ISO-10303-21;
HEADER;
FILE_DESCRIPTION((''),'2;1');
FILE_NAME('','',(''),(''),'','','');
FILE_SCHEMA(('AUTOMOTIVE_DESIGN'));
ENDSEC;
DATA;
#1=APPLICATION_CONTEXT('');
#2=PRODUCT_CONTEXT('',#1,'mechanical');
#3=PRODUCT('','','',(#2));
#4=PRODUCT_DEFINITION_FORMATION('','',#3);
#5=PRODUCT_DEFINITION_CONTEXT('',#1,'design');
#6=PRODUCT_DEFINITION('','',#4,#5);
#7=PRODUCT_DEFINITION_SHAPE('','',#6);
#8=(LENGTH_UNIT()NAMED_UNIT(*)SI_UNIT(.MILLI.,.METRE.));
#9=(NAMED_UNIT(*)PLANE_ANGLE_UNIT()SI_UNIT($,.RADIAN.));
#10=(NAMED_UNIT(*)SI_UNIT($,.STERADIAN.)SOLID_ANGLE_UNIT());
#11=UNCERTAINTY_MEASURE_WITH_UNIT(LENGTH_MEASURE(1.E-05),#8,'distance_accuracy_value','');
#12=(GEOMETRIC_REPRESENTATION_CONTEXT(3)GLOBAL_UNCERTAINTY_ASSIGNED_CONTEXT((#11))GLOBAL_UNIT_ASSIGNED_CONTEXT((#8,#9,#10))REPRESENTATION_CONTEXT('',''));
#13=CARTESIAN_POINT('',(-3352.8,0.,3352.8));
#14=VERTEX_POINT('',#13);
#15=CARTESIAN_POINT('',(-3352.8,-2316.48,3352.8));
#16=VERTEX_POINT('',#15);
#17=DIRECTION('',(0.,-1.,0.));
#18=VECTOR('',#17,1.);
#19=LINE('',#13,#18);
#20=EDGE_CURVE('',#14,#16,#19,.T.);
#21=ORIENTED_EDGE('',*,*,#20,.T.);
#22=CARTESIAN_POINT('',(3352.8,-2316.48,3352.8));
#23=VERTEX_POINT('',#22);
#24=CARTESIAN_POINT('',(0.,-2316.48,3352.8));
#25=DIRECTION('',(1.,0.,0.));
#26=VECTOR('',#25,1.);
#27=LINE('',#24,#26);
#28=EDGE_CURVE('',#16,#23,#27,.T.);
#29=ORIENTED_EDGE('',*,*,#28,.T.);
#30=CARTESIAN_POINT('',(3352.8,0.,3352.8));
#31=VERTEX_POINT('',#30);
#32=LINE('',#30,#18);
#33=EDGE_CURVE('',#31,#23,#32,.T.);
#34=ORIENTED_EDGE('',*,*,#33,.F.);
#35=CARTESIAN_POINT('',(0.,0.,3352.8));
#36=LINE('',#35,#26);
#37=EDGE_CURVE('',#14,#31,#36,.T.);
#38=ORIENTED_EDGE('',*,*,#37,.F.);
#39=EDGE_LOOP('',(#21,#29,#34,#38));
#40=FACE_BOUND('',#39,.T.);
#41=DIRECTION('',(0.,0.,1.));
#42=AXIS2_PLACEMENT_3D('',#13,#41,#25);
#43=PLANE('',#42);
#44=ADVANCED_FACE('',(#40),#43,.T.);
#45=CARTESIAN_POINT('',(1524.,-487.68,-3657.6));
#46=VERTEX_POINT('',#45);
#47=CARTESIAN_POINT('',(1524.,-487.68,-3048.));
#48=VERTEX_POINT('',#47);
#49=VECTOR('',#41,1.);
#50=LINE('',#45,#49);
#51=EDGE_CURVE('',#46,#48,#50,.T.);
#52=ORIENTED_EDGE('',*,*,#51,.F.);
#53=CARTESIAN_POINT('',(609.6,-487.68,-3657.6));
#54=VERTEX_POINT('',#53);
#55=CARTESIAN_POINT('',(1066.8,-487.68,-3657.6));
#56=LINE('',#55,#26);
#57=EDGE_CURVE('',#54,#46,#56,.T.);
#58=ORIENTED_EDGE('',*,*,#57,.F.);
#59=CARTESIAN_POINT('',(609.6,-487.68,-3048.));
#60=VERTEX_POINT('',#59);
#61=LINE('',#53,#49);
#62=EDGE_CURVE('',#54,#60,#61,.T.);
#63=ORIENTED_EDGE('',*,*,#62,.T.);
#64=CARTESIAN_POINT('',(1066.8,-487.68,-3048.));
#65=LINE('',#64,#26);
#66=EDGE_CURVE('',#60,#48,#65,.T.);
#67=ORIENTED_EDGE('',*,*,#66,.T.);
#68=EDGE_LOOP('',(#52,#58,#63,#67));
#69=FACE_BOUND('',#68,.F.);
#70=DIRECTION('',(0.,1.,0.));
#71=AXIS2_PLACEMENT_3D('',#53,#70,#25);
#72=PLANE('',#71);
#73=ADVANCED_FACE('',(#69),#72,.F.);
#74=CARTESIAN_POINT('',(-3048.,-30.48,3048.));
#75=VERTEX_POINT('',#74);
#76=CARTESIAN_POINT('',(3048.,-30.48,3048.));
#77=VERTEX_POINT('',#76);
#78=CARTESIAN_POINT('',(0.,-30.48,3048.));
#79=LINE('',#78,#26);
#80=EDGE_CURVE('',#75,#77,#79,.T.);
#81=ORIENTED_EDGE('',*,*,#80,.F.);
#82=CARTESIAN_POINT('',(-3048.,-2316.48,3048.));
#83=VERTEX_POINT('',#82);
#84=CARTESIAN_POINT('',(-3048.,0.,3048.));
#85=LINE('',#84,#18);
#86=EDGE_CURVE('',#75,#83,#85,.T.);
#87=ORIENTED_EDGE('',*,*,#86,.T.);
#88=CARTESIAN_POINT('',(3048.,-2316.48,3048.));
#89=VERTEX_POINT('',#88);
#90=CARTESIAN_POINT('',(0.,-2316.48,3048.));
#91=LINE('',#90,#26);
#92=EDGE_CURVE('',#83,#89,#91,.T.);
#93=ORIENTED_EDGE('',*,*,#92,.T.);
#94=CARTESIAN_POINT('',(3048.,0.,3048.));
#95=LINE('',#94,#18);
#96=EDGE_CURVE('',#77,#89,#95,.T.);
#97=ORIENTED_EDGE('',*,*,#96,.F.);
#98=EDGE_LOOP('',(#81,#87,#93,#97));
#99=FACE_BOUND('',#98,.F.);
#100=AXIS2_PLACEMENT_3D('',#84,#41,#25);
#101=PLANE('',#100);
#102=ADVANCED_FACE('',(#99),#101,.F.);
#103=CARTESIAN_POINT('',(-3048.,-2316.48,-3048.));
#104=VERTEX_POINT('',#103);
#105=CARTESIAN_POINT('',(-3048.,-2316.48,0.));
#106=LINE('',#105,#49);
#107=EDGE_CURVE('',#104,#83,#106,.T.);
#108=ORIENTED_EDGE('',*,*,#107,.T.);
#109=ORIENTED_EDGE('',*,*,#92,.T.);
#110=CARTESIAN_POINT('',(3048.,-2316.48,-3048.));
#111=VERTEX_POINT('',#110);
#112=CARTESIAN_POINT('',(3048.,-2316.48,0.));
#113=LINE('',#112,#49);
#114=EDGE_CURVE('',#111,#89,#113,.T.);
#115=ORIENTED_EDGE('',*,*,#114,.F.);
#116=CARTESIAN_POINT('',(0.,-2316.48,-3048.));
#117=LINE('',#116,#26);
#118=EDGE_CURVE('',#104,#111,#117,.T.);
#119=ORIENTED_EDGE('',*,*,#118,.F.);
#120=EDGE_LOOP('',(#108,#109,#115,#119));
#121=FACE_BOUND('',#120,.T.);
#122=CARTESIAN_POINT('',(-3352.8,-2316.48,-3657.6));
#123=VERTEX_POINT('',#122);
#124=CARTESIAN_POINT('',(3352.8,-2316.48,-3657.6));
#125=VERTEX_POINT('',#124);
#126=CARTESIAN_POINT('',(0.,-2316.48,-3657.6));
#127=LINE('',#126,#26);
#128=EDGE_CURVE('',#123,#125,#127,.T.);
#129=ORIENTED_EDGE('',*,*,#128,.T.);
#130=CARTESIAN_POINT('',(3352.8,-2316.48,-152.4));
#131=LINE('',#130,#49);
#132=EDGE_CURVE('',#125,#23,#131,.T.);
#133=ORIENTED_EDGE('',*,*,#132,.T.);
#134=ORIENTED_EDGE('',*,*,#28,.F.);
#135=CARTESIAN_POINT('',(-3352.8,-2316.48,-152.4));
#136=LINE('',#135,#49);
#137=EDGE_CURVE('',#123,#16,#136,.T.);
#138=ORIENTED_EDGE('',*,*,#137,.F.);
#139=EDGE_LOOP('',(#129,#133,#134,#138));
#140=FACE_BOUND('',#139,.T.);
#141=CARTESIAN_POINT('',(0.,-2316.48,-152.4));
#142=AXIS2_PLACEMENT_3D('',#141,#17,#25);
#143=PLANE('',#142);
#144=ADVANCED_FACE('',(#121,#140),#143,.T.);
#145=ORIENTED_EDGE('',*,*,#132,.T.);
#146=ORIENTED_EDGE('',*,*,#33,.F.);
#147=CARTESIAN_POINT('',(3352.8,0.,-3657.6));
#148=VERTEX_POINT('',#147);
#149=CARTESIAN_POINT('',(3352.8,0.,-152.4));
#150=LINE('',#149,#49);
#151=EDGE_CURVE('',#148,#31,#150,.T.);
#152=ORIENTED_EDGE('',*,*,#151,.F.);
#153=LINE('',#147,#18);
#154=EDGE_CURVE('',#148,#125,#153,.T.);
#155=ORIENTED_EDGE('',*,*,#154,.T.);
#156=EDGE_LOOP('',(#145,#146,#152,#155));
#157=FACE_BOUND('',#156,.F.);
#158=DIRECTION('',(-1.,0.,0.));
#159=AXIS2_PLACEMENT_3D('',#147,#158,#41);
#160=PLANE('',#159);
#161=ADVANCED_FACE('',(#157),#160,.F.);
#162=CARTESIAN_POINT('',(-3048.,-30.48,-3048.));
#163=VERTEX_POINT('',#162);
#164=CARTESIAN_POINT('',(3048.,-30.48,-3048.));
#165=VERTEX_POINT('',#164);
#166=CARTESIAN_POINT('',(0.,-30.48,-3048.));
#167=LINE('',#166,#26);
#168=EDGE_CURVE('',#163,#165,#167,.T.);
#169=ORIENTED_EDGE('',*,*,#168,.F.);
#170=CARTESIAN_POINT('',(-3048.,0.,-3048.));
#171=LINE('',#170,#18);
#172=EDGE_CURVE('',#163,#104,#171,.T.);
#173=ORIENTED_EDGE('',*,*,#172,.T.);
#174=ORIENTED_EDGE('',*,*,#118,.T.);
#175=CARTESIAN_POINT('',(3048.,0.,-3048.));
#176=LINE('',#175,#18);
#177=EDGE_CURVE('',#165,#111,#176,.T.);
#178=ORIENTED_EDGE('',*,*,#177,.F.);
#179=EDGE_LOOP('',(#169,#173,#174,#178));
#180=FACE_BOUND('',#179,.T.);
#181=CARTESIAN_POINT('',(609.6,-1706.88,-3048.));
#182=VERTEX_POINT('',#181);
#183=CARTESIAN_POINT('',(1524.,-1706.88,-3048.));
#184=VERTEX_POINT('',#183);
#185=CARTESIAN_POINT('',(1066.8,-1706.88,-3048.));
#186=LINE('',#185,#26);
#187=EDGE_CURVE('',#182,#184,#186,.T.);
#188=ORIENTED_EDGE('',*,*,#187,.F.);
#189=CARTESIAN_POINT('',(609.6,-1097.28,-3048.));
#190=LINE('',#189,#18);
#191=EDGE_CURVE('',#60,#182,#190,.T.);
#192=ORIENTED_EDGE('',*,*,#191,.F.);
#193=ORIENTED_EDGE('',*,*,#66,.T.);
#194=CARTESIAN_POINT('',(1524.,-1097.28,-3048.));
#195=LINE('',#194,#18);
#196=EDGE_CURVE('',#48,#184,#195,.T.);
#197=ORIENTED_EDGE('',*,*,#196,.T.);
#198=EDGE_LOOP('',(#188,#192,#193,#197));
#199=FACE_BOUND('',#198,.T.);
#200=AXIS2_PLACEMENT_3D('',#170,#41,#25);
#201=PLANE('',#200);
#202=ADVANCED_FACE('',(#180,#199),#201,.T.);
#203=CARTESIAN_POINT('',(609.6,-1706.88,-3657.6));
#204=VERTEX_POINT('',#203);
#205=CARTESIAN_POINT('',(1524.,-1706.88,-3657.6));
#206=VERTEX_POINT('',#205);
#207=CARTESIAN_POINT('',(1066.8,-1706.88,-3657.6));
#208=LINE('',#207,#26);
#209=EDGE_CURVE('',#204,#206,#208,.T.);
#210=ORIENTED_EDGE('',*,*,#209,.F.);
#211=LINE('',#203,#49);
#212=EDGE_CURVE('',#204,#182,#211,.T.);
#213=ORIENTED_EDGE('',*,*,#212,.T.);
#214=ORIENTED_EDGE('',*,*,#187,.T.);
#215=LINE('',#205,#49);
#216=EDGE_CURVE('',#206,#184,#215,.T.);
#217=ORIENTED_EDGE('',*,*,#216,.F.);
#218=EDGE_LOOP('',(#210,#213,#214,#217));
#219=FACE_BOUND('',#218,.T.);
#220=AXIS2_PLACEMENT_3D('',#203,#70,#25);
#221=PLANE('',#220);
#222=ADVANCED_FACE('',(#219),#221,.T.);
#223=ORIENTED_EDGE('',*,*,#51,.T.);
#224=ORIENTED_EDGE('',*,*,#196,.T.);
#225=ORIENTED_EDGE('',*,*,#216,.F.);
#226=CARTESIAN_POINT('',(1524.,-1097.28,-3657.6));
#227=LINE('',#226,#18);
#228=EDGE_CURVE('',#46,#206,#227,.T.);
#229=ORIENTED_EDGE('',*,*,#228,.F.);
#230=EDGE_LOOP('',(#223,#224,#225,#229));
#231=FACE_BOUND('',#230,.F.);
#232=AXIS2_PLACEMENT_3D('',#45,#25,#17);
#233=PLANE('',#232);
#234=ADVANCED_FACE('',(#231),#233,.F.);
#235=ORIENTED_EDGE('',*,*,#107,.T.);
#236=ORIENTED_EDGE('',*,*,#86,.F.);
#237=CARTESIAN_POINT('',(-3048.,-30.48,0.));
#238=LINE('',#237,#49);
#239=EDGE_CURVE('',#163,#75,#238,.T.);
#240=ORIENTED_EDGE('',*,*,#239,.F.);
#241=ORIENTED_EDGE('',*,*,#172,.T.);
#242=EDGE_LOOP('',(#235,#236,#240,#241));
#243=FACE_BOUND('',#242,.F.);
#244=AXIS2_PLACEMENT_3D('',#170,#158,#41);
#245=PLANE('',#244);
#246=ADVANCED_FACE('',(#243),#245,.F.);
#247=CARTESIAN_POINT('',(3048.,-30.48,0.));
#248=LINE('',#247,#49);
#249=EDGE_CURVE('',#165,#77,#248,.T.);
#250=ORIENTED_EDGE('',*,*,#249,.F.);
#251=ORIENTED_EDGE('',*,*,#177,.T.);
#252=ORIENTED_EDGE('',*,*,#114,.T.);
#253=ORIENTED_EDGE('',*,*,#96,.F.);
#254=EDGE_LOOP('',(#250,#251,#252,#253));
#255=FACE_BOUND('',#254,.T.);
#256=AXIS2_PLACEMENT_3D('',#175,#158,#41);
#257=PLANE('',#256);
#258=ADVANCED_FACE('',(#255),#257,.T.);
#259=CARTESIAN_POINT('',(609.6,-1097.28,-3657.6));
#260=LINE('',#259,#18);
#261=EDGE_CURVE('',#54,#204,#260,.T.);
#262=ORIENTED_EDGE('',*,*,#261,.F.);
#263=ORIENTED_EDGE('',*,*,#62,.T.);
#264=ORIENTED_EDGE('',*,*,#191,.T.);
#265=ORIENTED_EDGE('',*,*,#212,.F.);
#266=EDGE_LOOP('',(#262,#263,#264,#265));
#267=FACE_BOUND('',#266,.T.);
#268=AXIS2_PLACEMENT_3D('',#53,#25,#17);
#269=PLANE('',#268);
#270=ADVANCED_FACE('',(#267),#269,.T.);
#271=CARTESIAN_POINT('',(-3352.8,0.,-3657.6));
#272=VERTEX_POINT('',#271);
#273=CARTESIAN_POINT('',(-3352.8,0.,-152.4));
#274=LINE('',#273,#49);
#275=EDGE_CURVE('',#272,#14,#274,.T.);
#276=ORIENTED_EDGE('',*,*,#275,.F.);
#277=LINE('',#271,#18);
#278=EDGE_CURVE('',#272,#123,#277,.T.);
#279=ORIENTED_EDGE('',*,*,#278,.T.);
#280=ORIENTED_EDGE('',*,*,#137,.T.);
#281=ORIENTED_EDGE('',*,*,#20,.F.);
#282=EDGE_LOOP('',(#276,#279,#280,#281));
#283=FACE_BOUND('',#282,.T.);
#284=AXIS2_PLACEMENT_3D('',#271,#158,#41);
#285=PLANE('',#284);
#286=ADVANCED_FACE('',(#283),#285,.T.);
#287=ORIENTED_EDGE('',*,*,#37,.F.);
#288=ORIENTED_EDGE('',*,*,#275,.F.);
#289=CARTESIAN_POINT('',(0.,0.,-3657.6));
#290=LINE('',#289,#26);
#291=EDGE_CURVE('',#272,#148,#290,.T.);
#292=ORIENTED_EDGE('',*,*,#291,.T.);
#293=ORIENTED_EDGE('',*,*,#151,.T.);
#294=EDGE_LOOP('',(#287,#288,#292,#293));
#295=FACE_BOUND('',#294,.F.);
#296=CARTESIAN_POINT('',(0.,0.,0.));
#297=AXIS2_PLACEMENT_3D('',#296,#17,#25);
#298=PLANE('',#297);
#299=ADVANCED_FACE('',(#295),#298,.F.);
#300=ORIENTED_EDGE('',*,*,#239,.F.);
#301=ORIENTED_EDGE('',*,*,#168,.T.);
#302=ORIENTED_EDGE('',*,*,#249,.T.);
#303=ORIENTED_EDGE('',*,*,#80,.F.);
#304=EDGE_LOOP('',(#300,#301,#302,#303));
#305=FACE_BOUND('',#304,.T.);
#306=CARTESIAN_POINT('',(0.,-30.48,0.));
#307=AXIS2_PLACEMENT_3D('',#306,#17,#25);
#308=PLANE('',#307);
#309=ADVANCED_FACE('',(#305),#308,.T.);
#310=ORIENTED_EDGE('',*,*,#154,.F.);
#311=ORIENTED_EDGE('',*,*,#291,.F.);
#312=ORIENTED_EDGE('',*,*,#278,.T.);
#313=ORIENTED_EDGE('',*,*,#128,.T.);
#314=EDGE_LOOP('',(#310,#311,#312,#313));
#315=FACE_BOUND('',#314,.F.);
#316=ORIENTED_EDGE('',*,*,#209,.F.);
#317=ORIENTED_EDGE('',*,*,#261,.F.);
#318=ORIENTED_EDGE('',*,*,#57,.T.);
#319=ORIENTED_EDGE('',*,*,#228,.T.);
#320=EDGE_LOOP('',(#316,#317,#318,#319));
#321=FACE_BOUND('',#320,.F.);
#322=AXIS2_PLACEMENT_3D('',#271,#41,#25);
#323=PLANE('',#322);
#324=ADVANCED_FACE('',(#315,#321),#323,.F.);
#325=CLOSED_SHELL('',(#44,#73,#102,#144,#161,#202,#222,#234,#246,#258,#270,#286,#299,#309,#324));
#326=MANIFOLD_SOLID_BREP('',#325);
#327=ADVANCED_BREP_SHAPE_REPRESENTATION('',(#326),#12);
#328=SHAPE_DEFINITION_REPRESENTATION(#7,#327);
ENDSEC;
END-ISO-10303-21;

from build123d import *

# Parameters (mm, degrees)
F0_W     = 6705.6
F0_H     = 7010.4
F0_W_2   = 6096
F0_H_2   = 6096
F1_DEPTH = 2316.48
F2_DEPTH = 30.48
F5_W     = 914.4
F5_H     = 1219.2
F6_DEPTH = 609.6


# Not quite as in the source:
# - the program builds the solid bodies; features that only make, move or delete a surface that nothing else refers to are left out


with BuildPart() as f1:
    # F0 (on Front) → F1 (new body)
    with BuildSketch(Plane.XZ):
        with Locations((0, -152.4)):
            Rectangle(F0_W, F0_H)
        Rectangle(F0_W_2, F0_H_2, mode=Mode.SUBTRACT)
    extrude(amount=F1_DEPTH)

    # F0 (on Front) → F2 (join)
    with BuildSketch(Plane.XZ):
        Rectangle(F0_W_2, F0_H_2)
    extrude(amount=F2_DEPTH)

    # F5 (on face) → F6 (cut, through all)
    with BuildSketch(Plane(origin=(0, 0, -3657.6), x_dir=(1, 0, 0), z_dir=(0, 0, -1))):
        with Locations((1066.8, 1097.28)):
            Rectangle(F5_W, F5_H)
    extrude(amount=-F6_DEPTH, mode=Mode.SUBTRACT)


solid = f1.part
